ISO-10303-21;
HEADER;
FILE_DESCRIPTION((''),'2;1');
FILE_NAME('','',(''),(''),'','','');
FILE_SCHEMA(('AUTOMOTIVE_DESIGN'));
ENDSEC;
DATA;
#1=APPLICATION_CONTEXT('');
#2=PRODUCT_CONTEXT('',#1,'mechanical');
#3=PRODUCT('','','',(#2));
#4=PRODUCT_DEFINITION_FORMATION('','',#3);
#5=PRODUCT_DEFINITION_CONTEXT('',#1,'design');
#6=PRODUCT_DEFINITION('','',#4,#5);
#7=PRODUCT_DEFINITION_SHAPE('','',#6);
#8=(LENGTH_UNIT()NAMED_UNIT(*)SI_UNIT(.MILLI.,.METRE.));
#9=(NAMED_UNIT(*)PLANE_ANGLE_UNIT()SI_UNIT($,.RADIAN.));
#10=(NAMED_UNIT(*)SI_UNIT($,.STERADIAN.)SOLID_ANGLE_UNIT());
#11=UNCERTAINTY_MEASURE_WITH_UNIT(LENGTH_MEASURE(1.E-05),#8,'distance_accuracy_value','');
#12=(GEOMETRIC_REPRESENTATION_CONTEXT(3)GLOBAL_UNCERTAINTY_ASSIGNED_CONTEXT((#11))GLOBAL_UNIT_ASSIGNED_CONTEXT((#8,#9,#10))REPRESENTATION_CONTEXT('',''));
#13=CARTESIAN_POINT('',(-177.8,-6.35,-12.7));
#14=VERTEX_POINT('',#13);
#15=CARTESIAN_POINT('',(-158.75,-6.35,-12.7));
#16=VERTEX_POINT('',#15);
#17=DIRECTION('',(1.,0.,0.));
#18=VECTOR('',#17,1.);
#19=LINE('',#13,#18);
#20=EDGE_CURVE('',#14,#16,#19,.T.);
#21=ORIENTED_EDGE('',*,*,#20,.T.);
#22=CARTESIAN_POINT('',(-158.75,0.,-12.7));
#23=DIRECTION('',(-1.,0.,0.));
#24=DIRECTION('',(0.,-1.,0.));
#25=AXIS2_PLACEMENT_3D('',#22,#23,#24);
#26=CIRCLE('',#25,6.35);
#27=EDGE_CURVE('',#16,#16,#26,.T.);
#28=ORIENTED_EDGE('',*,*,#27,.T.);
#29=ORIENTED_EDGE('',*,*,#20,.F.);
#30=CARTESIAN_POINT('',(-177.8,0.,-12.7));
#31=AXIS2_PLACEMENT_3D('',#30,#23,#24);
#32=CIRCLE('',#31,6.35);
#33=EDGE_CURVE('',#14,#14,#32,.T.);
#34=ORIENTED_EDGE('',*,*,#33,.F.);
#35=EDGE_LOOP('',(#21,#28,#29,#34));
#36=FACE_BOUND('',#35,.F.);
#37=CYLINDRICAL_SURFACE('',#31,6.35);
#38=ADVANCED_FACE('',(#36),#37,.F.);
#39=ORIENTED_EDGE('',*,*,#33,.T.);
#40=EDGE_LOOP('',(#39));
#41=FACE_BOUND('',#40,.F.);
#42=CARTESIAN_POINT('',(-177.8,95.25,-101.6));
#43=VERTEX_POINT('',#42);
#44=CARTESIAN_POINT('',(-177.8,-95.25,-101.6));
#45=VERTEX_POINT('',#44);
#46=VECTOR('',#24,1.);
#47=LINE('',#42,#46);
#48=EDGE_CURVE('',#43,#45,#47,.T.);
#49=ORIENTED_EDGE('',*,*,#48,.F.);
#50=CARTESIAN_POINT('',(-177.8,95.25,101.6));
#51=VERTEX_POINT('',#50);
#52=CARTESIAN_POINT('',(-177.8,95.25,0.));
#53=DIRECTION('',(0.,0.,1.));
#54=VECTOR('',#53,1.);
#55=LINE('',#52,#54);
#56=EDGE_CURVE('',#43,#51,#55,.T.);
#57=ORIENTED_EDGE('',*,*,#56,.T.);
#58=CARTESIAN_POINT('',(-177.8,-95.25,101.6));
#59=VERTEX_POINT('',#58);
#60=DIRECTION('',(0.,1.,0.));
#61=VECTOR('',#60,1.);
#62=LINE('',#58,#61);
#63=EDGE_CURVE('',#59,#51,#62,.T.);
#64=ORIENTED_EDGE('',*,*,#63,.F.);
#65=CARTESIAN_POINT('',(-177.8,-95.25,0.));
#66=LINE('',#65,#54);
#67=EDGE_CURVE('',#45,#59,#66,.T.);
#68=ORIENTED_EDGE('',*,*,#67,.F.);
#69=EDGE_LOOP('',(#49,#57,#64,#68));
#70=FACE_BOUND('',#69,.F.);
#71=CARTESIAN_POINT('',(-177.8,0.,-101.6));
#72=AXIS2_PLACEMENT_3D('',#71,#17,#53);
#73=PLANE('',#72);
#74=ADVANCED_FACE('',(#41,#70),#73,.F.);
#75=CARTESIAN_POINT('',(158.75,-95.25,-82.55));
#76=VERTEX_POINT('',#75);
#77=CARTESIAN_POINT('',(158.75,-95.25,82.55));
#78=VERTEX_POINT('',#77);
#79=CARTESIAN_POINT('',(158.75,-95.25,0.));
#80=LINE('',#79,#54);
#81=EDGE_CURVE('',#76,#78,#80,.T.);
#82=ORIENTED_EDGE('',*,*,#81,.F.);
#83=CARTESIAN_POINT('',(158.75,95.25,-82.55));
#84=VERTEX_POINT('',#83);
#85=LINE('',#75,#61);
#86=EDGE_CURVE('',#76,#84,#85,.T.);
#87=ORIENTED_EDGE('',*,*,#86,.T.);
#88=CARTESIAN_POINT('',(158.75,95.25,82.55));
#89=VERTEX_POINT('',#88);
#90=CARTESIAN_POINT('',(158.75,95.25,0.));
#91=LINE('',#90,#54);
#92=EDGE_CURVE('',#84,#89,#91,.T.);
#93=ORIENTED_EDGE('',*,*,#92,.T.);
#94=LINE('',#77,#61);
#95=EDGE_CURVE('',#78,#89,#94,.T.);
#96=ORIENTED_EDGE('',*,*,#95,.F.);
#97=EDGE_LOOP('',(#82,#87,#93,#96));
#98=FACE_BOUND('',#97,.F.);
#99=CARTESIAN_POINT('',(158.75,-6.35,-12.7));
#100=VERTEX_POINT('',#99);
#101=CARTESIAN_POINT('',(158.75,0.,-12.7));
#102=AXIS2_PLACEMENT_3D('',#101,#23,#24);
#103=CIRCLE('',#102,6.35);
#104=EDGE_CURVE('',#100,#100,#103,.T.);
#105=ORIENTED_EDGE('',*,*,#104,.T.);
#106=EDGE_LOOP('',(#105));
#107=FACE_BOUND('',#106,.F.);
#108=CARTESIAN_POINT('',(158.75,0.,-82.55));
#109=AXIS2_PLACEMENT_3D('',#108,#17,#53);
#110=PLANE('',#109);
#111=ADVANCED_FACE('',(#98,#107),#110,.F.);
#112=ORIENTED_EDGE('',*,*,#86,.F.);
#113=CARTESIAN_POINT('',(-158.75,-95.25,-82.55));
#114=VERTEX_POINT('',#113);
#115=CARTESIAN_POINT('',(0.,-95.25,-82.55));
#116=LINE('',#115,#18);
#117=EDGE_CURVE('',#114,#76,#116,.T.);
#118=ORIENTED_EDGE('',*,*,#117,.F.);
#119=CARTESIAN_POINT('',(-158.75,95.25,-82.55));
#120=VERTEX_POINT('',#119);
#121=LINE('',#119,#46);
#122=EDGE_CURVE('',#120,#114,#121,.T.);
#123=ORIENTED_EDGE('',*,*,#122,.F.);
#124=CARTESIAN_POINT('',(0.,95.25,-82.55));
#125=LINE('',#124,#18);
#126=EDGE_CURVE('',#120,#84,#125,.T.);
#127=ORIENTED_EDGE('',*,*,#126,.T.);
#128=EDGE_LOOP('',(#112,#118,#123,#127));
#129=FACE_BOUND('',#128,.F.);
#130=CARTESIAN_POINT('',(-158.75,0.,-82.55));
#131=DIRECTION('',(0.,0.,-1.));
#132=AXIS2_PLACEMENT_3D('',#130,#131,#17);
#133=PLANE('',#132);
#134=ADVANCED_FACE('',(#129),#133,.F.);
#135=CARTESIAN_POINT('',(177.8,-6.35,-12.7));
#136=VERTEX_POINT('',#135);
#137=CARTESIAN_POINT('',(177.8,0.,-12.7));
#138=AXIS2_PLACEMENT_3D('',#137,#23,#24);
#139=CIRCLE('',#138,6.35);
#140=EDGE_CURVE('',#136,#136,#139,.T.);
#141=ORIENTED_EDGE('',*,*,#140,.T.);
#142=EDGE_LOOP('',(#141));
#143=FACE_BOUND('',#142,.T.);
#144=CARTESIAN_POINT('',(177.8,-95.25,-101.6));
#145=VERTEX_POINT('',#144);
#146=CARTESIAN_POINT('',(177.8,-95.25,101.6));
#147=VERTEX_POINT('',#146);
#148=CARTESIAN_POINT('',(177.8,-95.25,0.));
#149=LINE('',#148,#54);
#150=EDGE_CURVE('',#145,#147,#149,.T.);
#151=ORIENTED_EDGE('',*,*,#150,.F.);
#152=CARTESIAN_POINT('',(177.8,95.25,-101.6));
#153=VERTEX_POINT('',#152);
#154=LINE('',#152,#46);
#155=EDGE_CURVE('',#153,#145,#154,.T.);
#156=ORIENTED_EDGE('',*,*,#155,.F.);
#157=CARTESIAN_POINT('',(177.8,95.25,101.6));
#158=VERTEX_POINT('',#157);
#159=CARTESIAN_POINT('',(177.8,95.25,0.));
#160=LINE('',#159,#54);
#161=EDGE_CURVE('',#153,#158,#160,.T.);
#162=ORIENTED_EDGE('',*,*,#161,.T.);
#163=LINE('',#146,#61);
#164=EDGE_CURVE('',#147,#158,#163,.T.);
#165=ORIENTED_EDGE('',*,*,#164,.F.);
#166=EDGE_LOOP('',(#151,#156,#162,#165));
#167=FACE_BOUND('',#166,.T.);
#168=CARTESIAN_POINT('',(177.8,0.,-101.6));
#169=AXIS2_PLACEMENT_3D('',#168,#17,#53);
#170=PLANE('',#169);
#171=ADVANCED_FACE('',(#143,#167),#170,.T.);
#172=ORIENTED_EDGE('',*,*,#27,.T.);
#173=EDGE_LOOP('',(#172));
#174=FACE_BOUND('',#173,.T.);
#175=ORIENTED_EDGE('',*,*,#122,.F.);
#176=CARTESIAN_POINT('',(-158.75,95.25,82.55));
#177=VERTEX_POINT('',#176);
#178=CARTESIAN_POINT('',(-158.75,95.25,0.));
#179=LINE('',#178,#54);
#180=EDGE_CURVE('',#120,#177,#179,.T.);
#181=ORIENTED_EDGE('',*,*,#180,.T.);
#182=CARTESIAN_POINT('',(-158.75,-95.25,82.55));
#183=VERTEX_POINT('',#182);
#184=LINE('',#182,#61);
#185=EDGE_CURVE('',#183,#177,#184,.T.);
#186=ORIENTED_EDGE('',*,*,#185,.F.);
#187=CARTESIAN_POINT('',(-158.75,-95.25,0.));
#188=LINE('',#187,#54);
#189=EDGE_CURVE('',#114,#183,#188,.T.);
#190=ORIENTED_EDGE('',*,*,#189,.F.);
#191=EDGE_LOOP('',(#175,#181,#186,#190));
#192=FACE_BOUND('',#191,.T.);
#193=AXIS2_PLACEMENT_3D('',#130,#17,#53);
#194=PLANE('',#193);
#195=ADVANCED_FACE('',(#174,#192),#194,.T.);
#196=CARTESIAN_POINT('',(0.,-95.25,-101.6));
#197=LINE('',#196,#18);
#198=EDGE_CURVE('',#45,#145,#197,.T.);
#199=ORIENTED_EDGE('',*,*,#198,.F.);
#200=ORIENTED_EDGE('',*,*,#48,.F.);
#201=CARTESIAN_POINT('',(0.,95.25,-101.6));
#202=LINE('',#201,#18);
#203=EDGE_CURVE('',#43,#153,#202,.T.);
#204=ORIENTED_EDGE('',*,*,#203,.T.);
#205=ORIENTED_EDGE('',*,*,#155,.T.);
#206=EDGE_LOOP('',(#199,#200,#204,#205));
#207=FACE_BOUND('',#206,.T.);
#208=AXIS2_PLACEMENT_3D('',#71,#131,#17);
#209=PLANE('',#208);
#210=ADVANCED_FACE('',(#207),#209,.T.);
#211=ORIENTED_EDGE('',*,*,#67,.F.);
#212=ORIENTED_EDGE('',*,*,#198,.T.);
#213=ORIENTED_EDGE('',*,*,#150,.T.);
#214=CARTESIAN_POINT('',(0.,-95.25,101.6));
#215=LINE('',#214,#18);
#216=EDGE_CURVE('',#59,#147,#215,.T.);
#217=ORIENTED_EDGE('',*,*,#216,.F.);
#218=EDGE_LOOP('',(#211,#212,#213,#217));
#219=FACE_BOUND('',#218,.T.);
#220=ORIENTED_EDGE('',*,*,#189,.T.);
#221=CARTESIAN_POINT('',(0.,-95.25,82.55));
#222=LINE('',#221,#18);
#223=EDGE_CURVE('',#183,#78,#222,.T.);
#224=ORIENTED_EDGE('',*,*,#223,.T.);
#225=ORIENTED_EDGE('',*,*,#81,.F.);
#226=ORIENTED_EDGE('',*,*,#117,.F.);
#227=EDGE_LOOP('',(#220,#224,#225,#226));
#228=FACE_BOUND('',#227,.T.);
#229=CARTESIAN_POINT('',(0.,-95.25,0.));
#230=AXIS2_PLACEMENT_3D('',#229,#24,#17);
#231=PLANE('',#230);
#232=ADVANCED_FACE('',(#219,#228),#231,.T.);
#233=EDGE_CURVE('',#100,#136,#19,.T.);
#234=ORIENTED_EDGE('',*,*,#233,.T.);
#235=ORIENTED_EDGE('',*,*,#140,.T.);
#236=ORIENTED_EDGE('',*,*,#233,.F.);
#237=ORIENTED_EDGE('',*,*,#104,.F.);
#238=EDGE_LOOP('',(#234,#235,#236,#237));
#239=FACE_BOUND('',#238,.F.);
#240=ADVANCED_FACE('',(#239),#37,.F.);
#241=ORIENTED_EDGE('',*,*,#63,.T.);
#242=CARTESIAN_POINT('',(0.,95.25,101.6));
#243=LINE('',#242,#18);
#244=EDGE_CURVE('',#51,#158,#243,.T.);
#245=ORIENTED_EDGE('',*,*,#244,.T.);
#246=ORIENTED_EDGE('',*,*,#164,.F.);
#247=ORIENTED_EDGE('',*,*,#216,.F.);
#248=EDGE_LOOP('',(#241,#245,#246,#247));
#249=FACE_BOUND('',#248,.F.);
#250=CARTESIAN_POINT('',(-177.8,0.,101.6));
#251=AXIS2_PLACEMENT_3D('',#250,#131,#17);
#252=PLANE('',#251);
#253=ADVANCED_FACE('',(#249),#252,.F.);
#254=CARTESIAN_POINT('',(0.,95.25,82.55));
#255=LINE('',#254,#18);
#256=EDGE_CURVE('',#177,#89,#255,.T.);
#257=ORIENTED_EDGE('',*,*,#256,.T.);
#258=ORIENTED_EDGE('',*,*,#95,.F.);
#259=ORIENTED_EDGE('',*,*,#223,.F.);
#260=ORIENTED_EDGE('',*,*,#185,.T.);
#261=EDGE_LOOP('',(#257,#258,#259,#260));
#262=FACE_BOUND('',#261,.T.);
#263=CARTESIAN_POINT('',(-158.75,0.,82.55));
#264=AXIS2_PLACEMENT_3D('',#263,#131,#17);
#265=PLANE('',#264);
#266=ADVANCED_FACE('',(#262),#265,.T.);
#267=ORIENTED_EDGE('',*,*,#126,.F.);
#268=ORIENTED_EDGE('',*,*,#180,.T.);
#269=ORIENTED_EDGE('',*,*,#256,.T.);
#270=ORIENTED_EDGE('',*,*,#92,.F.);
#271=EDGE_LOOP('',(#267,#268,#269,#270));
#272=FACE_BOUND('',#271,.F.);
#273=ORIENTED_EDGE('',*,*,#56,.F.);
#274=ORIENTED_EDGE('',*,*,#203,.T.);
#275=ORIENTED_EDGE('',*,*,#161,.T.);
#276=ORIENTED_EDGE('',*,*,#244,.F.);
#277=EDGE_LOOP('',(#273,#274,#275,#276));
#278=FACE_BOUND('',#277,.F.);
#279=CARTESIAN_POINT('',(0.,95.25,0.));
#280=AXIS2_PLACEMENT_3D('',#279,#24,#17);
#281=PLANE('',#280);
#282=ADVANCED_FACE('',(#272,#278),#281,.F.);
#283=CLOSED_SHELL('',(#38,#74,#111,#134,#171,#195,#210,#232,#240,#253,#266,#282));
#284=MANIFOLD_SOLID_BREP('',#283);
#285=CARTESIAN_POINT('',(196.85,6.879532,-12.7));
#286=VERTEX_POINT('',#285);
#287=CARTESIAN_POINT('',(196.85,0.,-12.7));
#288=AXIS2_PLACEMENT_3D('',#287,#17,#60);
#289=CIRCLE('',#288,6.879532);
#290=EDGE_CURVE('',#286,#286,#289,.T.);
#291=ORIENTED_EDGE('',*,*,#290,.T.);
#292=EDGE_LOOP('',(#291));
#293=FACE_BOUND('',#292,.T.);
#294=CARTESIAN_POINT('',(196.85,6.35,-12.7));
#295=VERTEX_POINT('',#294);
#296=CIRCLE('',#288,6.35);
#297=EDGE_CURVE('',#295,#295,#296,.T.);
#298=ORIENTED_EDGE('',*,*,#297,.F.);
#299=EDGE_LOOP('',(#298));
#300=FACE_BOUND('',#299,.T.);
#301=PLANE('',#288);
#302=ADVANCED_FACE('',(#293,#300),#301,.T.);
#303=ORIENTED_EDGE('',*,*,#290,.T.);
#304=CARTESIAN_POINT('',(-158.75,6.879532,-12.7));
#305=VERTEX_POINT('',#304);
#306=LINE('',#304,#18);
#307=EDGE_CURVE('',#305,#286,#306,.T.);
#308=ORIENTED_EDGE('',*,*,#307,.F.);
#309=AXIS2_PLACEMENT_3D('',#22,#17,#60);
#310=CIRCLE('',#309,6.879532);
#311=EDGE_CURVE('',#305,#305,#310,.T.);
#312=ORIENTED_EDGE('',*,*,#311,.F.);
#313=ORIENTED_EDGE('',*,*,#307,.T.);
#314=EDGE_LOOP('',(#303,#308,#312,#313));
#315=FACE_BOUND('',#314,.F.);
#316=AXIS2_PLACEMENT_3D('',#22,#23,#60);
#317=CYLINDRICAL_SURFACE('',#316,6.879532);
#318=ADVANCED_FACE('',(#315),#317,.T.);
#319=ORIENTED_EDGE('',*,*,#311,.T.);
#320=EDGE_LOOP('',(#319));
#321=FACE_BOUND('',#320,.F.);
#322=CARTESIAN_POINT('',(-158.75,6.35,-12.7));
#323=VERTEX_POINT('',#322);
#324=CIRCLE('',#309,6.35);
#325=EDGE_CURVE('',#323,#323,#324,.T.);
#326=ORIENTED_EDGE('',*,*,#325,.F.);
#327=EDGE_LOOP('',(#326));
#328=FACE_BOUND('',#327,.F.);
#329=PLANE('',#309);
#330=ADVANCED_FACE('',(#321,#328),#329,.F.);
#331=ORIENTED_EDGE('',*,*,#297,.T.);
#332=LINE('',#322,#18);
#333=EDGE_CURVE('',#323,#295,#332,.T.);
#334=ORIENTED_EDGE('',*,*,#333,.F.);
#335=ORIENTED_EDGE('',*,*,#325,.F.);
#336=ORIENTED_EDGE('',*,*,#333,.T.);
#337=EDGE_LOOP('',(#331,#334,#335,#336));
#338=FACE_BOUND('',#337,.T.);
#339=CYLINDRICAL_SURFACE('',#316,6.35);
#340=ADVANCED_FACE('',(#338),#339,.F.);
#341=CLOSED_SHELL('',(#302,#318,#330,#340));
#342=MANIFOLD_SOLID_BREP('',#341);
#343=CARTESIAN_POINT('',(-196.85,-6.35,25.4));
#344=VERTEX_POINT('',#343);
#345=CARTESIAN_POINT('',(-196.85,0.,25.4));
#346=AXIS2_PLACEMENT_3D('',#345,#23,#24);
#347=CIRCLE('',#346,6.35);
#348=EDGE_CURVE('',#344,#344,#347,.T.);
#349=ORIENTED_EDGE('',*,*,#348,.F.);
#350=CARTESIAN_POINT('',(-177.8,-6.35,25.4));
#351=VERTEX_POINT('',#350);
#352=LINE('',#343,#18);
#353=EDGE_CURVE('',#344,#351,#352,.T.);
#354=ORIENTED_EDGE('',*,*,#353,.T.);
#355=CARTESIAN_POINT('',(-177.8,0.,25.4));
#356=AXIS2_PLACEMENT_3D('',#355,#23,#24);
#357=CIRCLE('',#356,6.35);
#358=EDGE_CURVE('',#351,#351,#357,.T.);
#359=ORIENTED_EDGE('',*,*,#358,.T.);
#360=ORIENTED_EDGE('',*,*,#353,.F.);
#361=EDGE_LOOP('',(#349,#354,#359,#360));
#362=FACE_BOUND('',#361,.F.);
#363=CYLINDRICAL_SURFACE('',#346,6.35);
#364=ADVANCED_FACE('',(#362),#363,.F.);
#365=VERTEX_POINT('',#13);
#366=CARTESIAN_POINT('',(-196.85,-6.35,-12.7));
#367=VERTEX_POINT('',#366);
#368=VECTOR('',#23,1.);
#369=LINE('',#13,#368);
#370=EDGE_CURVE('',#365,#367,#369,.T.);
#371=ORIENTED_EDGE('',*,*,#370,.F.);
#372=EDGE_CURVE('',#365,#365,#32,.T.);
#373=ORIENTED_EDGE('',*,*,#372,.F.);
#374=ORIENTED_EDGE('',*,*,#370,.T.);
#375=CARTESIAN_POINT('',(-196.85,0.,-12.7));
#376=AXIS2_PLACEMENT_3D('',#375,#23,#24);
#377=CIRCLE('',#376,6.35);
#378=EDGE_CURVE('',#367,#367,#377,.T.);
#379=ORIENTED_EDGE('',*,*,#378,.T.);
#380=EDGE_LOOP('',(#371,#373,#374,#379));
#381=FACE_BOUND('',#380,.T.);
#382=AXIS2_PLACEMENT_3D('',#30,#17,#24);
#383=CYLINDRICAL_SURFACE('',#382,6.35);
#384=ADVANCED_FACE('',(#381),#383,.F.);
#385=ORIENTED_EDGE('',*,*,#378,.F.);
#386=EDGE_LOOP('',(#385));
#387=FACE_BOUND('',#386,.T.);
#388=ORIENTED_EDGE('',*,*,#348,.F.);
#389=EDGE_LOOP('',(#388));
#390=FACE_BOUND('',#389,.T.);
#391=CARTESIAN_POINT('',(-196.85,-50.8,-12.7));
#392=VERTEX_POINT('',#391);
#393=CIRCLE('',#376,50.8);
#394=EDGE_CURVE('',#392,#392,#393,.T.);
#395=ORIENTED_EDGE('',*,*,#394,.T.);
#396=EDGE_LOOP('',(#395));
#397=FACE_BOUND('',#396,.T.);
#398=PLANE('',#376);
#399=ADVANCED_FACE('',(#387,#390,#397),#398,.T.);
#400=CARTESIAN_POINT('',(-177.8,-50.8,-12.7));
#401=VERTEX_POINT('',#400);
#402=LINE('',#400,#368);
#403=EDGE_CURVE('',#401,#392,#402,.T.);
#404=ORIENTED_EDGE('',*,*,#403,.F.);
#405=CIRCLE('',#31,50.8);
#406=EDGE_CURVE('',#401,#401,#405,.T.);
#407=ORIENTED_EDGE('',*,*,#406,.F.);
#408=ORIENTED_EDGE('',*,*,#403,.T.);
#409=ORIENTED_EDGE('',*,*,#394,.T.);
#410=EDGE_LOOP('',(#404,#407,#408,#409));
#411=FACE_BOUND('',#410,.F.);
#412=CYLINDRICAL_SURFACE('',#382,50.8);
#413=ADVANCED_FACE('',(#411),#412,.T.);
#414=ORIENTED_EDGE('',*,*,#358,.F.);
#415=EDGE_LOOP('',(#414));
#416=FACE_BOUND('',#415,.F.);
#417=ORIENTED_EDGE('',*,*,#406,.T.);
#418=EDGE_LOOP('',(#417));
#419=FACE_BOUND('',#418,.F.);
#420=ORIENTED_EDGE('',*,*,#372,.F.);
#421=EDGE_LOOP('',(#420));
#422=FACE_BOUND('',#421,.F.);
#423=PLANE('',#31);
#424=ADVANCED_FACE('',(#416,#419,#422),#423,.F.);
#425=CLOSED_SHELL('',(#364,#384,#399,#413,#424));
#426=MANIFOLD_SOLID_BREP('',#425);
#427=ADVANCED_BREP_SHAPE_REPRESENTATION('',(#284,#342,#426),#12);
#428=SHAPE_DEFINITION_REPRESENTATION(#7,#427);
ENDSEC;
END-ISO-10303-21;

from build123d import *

# Parameters (mm, degrees)
F0_W      = 355.6
F0_H      = 203.2
F0_W_2    = 317.5
F0_H_2    = 165.1
F1_DEPTH  = 95.25
F2_R      = 6.35
F3_DEPTH  = 355.601
F4_R      = 50.8
F4_R_2    = 6.35
F5_DEPTH  = 19.05
F6_R      = 6.35
F7_DEPTH  = 19.05
F9_R      = 6.879532365
F9_R_2    = 6.35
F10_DEPTH = 355.6


# Not quite as in the source:
# - the program builds the solid bodies; features that only make, move or delete a surface that nothing else refers to are left out


with BuildPart() as f1:
    # F0 (on Front) → F1 (new body, symmetric)
    with BuildSketch(Plane.XZ):
        Rectangle(F0_W, F0_H)
        Rectangle(F0_W_2, F0_H_2, mode=Mode.SUBTRACT)
    extrude(amount=F1_DEPTH, both=True)

    # F2 (on face) → F3 (cut, through all)
    with BuildSketch(Plane(origin=(-177.8, 0, 0), x_dir=(0, -1, 0), z_dir=(-1, 0, 0))):
        with Locations((0, -12.7)):
            Circle(F2_R)
    extrude(amount=-F3_DEPTH, mode=Mode.SUBTRACT)


with BuildPart() as f5:
    # F4 (on face) → F5 (new body)
    with BuildSketch(Plane(origin=(-177.8, 0, 0), x_dir=(0, -1, 0), z_dir=(-1, 0, 0))):
        with Locations((0, -12.7)):
            Circle(F4_R)
        with Locations((0, -12.7)):
            Circle(F4_R_2, mode=Mode.SUBTRACT)
    extrude(amount=F5_DEPTH)

    # F6 (on face) → F7 (cut, through all)
    with BuildSketch(Plane(origin=(-196.85, 0, 0), x_dir=(0, -1, 0), z_dir=(-1, 0, 0))):
        with Locations((0, 25.4)):
            Circle(F6_R)
    extrude(amount=-F7_DEPTH, mode=Mode.SUBTRACT)


with BuildPart() as f10:
    # F9 (on face) → F10 (new body)
    with BuildSketch(Plane.YZ.offset(-158.75)):
        with Locations((0, -12.7)):
            Circle(F9_R)
        with Locations((0, -12.7)):
            Circle(F9_R_2, mode=Mode.SUBTRACT)
    extrude(amount=F10_DEPTH)


solid = Compound([f1.part, f5.part, f10.part])
